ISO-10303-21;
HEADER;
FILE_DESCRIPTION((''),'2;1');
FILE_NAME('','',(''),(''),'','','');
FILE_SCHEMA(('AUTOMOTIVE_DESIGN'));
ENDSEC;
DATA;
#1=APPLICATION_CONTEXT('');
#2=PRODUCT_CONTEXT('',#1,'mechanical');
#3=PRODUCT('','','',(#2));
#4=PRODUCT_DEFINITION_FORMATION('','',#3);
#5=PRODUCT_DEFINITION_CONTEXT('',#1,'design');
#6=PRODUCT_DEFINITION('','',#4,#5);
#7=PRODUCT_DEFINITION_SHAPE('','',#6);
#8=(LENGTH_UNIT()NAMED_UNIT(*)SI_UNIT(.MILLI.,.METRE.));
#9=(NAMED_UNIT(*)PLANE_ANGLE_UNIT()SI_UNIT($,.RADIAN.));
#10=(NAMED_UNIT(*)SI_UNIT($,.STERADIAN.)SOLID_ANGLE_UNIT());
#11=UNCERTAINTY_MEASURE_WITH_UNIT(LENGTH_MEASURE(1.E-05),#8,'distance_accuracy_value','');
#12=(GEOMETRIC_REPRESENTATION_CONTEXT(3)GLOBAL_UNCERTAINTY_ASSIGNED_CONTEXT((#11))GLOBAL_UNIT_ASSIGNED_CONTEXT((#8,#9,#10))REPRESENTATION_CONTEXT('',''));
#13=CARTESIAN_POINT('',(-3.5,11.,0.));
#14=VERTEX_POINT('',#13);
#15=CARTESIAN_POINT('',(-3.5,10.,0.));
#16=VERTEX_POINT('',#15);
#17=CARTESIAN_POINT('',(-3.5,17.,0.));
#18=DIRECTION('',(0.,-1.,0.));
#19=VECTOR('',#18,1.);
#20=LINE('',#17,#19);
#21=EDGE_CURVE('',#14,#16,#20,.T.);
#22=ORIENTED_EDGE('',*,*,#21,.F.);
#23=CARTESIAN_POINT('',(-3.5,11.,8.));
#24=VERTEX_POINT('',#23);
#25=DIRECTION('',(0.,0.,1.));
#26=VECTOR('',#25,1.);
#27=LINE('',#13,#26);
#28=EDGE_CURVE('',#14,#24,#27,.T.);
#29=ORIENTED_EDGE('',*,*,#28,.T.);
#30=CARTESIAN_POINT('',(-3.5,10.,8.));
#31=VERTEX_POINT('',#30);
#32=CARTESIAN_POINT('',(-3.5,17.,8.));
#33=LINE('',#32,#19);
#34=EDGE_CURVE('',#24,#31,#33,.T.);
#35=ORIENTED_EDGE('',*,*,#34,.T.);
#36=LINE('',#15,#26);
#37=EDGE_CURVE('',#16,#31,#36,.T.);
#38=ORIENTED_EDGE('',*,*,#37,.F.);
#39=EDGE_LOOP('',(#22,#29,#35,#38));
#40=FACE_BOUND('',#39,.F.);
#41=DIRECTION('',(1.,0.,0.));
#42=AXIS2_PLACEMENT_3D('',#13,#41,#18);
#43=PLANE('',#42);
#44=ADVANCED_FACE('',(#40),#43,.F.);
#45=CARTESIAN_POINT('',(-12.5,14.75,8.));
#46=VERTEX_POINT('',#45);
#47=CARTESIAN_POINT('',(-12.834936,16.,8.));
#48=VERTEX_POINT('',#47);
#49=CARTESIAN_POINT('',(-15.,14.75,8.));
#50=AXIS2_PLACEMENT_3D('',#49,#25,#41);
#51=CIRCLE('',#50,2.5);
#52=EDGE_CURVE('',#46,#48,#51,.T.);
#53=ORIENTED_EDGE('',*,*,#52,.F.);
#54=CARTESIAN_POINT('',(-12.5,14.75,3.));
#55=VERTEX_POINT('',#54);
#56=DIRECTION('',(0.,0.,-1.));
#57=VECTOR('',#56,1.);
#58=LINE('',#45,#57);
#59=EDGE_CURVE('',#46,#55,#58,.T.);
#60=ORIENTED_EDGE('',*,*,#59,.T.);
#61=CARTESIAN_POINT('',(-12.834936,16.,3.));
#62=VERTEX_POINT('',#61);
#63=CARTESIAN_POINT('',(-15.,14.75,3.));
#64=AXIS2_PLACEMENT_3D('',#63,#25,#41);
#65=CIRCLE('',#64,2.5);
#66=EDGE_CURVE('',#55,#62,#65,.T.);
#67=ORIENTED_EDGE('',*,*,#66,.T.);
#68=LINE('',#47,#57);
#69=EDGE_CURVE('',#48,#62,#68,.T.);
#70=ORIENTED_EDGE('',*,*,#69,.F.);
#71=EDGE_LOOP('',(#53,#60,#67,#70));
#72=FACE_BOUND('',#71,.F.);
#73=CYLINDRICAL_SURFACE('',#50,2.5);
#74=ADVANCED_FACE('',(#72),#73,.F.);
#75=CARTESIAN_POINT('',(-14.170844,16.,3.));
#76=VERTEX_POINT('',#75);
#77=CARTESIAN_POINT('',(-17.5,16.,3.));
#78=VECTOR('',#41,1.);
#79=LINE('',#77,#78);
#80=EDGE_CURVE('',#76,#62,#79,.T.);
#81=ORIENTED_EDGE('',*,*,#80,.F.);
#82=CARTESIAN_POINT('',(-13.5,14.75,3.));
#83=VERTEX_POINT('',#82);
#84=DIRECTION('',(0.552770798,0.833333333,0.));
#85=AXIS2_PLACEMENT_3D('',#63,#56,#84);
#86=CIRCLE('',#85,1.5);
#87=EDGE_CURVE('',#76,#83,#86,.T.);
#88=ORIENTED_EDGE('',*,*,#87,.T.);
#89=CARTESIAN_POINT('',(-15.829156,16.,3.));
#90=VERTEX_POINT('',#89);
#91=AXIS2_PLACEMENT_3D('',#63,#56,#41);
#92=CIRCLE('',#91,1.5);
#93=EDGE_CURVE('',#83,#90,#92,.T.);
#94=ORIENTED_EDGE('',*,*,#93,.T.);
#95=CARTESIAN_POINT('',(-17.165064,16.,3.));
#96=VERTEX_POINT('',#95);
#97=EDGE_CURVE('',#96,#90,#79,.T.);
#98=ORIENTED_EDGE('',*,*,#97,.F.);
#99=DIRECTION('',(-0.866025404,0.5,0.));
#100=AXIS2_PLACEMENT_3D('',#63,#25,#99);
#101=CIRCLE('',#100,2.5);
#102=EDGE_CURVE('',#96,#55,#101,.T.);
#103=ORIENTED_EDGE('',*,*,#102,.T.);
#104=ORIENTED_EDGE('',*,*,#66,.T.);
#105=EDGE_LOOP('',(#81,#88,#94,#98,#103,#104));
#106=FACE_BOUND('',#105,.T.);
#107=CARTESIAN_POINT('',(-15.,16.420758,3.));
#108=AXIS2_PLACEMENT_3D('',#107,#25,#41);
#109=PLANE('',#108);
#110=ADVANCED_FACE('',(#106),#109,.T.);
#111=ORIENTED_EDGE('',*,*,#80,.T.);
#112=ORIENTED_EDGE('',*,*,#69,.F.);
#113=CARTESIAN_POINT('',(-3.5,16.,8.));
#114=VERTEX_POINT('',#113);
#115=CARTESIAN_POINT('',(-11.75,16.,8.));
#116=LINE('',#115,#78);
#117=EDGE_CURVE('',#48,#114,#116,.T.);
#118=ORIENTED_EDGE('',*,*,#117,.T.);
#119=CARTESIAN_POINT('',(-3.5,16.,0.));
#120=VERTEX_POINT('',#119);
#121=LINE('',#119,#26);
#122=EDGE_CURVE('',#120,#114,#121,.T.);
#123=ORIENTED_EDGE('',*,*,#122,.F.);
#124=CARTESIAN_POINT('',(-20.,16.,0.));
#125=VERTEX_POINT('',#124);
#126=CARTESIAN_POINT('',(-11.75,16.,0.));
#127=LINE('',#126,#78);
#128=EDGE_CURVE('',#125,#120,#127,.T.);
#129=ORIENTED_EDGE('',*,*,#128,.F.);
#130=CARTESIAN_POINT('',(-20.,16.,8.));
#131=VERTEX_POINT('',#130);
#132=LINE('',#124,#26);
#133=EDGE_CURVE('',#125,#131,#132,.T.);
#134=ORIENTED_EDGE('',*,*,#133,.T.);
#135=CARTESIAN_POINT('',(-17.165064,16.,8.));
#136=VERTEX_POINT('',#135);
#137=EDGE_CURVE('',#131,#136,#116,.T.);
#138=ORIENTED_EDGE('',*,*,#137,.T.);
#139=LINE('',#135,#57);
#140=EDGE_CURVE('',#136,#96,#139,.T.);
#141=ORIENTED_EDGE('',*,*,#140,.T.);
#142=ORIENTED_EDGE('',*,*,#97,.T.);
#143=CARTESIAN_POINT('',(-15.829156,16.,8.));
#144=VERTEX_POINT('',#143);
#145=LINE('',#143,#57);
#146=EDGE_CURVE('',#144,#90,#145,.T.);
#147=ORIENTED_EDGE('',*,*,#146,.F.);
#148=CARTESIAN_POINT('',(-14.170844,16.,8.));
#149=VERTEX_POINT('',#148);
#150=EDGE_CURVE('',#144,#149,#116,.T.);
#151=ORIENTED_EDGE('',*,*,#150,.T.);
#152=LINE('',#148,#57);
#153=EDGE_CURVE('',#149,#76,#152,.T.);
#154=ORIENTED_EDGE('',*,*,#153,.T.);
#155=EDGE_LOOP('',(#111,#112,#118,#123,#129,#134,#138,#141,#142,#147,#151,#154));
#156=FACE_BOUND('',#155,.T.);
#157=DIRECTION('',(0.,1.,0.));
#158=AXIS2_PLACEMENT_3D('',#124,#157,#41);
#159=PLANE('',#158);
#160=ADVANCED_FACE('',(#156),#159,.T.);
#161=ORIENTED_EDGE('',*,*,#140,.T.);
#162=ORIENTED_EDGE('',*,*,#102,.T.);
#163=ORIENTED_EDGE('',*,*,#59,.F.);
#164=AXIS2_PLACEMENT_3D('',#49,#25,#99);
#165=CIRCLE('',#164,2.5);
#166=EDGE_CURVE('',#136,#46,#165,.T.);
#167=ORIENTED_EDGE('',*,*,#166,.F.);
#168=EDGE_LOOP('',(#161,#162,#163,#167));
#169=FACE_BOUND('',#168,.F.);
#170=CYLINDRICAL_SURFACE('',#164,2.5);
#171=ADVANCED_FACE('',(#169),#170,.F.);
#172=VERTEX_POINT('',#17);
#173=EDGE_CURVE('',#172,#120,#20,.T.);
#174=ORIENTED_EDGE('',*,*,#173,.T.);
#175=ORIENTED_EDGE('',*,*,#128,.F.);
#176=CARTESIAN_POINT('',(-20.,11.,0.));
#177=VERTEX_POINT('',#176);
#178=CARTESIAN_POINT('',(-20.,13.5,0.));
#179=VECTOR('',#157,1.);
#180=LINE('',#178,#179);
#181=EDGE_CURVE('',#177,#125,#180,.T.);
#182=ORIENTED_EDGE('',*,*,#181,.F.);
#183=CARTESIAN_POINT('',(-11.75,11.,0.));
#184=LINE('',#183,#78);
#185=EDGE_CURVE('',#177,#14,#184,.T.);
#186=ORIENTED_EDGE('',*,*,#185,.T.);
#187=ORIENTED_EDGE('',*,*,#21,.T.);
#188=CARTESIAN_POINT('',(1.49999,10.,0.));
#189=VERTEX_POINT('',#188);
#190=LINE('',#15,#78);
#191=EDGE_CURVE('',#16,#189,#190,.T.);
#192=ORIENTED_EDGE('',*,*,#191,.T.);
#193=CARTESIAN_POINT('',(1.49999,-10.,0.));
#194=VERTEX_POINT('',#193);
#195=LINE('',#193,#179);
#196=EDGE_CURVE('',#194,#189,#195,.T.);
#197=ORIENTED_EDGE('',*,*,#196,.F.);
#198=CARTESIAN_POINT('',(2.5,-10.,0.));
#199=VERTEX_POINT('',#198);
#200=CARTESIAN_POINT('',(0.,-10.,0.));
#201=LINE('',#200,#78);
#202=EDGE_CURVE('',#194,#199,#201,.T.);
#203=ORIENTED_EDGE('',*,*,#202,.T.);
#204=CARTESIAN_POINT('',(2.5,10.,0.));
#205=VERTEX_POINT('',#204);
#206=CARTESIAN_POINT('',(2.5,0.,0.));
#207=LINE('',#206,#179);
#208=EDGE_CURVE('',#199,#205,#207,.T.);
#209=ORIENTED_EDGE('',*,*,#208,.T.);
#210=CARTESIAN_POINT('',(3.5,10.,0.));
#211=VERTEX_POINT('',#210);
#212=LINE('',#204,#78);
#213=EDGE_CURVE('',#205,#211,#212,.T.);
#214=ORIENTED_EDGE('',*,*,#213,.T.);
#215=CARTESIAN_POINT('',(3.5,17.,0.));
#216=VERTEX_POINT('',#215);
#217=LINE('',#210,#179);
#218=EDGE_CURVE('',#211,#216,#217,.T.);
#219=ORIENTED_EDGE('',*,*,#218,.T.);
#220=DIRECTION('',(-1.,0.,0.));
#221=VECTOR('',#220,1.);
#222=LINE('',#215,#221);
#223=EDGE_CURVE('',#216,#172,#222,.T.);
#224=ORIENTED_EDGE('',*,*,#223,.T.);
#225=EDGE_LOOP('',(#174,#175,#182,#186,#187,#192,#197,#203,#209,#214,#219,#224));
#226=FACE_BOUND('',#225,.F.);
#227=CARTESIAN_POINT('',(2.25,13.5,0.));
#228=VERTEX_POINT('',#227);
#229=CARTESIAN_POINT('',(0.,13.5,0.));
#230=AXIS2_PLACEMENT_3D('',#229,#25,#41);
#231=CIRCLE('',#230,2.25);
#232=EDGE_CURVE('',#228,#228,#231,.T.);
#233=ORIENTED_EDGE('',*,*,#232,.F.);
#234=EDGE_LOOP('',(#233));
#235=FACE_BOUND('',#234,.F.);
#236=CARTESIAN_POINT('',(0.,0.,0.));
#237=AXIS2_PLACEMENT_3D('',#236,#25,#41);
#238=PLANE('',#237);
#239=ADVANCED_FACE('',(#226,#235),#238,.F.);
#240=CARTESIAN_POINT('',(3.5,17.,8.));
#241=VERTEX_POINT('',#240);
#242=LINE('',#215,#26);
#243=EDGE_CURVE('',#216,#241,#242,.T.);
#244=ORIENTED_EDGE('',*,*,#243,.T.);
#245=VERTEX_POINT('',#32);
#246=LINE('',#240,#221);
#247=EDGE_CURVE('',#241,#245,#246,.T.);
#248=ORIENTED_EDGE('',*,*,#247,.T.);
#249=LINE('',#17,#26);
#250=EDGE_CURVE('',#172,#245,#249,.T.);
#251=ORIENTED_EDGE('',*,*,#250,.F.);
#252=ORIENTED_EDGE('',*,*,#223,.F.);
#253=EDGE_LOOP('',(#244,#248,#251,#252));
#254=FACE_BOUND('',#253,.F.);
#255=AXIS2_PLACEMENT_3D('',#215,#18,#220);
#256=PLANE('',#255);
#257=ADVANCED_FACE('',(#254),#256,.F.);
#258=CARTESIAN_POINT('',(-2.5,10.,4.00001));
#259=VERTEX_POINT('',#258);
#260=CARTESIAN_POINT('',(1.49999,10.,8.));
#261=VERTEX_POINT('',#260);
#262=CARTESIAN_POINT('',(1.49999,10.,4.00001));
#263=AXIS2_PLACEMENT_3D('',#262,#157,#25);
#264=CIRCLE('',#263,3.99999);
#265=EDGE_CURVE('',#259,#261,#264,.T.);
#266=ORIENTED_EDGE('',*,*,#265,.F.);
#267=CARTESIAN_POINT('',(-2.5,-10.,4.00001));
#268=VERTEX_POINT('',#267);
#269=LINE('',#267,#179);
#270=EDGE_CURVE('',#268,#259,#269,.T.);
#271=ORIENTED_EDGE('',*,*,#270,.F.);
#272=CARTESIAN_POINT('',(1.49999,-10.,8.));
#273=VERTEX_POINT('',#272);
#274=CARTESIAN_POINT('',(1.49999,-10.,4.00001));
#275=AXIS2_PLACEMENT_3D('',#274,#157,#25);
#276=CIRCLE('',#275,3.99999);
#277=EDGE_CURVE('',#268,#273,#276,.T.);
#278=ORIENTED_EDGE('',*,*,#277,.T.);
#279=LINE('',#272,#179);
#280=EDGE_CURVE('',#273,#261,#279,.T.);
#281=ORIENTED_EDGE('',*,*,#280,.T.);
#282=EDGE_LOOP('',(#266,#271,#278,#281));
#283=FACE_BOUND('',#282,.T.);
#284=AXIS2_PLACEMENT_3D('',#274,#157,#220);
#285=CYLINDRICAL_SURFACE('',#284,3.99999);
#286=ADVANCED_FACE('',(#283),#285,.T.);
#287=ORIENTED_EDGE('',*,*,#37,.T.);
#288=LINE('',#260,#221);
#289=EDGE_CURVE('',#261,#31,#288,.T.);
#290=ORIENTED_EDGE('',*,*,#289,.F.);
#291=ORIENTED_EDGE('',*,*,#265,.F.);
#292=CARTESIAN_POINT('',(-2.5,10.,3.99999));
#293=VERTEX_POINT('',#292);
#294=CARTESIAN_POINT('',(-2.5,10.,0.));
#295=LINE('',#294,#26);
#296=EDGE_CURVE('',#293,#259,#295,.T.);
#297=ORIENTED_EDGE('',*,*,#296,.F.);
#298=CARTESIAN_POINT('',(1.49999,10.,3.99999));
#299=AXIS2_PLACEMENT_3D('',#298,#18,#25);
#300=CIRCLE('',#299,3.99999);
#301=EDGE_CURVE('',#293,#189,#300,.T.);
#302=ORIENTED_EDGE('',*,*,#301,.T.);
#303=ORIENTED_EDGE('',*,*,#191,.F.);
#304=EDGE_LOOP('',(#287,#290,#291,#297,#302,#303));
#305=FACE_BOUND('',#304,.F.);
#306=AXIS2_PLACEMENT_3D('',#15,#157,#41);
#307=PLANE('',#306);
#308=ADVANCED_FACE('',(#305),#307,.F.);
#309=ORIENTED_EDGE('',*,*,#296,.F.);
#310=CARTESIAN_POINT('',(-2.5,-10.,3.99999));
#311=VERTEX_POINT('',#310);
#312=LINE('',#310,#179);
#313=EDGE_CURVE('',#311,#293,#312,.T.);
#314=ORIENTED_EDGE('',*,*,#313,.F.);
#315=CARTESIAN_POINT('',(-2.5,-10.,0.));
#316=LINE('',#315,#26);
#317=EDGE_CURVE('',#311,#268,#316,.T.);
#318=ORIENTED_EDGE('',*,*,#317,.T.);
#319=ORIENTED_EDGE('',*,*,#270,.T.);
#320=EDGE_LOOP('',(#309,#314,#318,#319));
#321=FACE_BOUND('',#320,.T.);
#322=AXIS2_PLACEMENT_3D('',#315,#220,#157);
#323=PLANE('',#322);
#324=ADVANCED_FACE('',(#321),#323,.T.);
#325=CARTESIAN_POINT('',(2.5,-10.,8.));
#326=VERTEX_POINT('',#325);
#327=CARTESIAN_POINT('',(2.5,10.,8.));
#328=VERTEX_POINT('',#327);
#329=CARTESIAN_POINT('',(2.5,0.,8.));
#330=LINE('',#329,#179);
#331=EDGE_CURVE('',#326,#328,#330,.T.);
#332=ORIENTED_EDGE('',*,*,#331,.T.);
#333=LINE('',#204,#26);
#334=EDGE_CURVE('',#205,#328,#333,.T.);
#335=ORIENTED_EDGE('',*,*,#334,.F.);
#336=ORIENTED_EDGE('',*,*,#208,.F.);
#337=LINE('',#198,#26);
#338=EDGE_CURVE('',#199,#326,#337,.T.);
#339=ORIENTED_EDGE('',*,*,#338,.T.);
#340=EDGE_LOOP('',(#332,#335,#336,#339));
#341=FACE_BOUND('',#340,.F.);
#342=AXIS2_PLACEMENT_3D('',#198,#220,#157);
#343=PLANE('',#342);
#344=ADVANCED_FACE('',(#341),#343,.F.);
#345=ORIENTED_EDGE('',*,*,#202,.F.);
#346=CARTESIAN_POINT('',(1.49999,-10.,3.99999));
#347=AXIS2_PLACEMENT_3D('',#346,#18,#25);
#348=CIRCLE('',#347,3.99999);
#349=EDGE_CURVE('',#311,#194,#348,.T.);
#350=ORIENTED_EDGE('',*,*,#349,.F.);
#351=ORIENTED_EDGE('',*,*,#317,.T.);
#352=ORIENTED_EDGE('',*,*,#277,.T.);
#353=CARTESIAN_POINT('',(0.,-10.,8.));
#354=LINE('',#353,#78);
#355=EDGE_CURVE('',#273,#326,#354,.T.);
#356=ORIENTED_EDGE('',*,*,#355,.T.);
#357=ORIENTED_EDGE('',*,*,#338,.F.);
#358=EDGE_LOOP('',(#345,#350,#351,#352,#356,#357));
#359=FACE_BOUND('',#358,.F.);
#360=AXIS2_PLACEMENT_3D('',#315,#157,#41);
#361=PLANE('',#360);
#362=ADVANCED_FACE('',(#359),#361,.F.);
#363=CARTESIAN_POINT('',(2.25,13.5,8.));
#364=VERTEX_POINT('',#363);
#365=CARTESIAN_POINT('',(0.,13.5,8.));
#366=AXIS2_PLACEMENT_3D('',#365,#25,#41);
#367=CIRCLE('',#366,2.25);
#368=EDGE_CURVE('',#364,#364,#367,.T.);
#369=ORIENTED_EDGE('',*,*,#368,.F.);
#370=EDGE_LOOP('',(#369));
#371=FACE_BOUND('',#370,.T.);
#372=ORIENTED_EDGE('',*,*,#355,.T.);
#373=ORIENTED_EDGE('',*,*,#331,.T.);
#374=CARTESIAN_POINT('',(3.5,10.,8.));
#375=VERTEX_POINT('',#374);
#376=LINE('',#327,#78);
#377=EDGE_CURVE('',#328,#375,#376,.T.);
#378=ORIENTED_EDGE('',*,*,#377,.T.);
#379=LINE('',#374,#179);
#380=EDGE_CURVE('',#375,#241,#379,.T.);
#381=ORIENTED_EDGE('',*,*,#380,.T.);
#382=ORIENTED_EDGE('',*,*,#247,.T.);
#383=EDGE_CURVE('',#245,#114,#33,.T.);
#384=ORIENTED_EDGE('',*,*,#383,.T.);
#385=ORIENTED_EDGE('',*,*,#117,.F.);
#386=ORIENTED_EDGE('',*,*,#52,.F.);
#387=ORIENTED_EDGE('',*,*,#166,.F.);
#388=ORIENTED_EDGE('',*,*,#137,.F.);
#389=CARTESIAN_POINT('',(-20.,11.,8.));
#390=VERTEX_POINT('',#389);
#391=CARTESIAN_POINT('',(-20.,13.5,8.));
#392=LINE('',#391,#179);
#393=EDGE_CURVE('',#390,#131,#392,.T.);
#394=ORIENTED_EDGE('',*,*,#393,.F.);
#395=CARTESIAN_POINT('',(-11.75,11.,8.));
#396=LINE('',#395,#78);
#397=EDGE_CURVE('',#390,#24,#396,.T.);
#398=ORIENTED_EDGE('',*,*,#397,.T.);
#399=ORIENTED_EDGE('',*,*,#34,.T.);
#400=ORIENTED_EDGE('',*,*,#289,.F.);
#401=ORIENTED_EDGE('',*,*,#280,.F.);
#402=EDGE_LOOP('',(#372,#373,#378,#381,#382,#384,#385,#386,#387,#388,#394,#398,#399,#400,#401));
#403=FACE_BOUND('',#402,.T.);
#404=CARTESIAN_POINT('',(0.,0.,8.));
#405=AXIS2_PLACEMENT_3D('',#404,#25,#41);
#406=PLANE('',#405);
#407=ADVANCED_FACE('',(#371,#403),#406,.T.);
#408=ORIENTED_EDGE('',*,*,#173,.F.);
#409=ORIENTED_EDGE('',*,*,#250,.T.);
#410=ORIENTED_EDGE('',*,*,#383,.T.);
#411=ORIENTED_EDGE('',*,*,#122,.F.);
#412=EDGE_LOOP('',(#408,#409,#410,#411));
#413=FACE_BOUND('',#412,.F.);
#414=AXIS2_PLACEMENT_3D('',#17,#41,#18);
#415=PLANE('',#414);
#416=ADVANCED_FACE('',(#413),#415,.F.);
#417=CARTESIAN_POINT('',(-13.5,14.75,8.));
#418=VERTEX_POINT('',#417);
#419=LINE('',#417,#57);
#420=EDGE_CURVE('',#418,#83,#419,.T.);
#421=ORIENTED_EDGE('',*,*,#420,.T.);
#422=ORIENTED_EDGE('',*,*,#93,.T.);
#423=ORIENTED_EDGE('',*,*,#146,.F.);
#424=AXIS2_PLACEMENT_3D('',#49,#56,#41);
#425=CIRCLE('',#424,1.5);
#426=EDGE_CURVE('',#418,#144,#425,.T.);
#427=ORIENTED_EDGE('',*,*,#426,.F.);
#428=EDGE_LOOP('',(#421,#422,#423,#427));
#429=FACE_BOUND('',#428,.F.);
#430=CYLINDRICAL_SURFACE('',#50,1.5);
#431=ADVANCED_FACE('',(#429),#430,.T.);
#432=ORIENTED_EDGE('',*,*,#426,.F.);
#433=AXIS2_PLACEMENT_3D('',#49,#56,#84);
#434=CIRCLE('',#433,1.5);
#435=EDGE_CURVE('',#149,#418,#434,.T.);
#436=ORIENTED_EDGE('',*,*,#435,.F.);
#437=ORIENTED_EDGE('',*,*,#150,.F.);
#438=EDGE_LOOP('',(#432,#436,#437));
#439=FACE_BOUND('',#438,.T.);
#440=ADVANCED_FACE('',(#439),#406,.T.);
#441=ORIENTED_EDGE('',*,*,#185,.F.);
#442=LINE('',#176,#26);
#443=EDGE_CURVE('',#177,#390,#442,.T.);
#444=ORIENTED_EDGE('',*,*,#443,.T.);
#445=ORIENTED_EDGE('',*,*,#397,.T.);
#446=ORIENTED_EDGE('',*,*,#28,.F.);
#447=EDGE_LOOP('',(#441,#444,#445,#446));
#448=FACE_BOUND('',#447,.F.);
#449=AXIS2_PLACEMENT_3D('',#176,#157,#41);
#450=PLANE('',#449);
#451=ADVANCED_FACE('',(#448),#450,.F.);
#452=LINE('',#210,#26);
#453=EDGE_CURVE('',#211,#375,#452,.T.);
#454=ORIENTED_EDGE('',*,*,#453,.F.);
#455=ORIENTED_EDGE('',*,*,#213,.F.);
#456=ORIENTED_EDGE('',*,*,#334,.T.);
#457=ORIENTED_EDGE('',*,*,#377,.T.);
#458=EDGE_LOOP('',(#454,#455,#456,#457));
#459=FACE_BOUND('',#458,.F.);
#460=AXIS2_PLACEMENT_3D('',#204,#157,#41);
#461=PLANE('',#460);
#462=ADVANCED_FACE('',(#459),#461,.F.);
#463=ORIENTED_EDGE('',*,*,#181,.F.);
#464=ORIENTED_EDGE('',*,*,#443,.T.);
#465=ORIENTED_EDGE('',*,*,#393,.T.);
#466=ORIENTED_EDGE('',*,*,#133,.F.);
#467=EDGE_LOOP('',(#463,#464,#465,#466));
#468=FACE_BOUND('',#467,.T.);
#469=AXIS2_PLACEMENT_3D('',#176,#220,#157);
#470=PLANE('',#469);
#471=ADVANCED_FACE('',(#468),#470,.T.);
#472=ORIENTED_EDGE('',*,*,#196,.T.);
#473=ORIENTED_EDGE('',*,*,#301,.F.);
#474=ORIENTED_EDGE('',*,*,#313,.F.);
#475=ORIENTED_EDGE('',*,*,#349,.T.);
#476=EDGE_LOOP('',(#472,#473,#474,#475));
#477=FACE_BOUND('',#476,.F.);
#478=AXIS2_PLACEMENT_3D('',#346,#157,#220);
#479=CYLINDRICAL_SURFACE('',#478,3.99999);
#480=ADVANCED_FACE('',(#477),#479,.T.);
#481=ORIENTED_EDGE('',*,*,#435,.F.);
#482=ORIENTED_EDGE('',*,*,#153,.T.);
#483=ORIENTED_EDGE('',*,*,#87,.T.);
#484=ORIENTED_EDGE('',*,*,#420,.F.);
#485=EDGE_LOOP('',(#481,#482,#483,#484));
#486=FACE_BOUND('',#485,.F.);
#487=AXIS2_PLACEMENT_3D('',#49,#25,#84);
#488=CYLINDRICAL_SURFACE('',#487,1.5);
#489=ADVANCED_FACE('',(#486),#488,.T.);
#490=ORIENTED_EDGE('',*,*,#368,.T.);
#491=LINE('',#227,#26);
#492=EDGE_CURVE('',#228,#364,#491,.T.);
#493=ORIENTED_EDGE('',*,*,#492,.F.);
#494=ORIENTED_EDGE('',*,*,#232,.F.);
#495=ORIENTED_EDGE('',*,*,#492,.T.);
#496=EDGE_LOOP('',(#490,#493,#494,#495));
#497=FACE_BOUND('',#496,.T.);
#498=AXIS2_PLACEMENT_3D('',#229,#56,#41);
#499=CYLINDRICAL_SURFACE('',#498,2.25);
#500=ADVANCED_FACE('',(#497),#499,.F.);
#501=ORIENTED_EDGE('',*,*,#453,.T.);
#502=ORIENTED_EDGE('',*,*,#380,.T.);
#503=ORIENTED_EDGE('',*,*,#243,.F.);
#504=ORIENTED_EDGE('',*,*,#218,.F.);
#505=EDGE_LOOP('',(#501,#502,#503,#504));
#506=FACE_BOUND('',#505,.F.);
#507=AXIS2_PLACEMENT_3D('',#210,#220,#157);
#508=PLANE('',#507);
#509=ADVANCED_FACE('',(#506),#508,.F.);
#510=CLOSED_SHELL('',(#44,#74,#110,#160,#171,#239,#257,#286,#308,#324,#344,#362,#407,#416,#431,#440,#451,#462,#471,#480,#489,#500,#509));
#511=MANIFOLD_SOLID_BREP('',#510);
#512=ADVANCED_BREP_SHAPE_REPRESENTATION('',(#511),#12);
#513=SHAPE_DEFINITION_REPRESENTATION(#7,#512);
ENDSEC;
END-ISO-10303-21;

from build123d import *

# Parameters (mm, degrees)
F0_W     = 5
F0_H     = 20
F0_R     = 2.25
F0_W_2   = 16.5
F0_H_2   = 5
F1_DEPTH = 8
F2_R     = 3.99999
F4_DEPTH = 5


# Not quite as in the source:
# - a fillet or chamfer is up to 0.001 mm smaller than in the source, because OpenCascade refuses the exact size
# - a feature names something its author has since deleted; it is built from what else it names


with BuildPart() as f1:
    # F0 (on Top) → F1 (new body)
    with BuildSketch(Plane.XY):
        Rectangle(F0_W, F0_H)
        Polygon((-2.5, 10), (2.5, 10), (3.5, 10), (3.5, 17), (-3.5, 17), (-3.5, 16), (-3.5, 11), (-3.5, 10), align=None)
        with Locations((0, 13.5)):
            Circle(F0_R, mode=Mode.SUBTRACT)
        with Locations((-11.75, 13.5)):
            Rectangle(F0_W_2, F0_H_2)
    extrude(amount=F1_DEPTH)

    # F2 (radius 4 in the source; OpenCascade refuses exactly that, so slightly less here)
    f2_edges = [f1.edges().sort_by_distance(p)[0] for p in [
        (-2.5, 0, 8),
        (-2.5, 0, 0),
    ]]
    fillet(f2_edges, radius=F2_R)

    # F3 (on face) → F4 (cut)
    with BuildSketch(Plane.XY.offset(8)):
        with BuildLine():
            ThreePointArc((-15.8291561976, 16), (-15, 16.25), (-14.1708438024, 16))
            Line((-14.1708438024, 16), (-12.8349364905, 16))
            ThreePointArc((-12.8349364905, 16), (-15, 17.25), (-17.1650635095, 16))
            Line((-17.1650635095, 16), (-15.8291561976, 16))
        make_face()
        with BuildLine():
            ThreePointArc((-14.1708438024, 16), (-13.6783089816, 15.4593185827), (-13.5, 14.75))
            ThreePointArc((-13.5, 14.75), (-15.7093185827, 13.4283089816), (-15.8291561976, 16))
            Line((-15.8291561976, 16), (-17.1650635095, 16))
            ThreePointArc((-17.1650635095, 16), (-15.6470476128, 12.3351854343), (-12.5, 14.75))
            ThreePointArc((-12.5, 14.75), (-12.5851854343, 15.3970476128), (-12.8349364905, 16))
            Line((-12.8349364905, 16), (-14.1708438024, 16))
        make_face()
    extrude(amount=-F4_DEPTH, mode=Mode.SUBTRACT)


solid = f1.part
